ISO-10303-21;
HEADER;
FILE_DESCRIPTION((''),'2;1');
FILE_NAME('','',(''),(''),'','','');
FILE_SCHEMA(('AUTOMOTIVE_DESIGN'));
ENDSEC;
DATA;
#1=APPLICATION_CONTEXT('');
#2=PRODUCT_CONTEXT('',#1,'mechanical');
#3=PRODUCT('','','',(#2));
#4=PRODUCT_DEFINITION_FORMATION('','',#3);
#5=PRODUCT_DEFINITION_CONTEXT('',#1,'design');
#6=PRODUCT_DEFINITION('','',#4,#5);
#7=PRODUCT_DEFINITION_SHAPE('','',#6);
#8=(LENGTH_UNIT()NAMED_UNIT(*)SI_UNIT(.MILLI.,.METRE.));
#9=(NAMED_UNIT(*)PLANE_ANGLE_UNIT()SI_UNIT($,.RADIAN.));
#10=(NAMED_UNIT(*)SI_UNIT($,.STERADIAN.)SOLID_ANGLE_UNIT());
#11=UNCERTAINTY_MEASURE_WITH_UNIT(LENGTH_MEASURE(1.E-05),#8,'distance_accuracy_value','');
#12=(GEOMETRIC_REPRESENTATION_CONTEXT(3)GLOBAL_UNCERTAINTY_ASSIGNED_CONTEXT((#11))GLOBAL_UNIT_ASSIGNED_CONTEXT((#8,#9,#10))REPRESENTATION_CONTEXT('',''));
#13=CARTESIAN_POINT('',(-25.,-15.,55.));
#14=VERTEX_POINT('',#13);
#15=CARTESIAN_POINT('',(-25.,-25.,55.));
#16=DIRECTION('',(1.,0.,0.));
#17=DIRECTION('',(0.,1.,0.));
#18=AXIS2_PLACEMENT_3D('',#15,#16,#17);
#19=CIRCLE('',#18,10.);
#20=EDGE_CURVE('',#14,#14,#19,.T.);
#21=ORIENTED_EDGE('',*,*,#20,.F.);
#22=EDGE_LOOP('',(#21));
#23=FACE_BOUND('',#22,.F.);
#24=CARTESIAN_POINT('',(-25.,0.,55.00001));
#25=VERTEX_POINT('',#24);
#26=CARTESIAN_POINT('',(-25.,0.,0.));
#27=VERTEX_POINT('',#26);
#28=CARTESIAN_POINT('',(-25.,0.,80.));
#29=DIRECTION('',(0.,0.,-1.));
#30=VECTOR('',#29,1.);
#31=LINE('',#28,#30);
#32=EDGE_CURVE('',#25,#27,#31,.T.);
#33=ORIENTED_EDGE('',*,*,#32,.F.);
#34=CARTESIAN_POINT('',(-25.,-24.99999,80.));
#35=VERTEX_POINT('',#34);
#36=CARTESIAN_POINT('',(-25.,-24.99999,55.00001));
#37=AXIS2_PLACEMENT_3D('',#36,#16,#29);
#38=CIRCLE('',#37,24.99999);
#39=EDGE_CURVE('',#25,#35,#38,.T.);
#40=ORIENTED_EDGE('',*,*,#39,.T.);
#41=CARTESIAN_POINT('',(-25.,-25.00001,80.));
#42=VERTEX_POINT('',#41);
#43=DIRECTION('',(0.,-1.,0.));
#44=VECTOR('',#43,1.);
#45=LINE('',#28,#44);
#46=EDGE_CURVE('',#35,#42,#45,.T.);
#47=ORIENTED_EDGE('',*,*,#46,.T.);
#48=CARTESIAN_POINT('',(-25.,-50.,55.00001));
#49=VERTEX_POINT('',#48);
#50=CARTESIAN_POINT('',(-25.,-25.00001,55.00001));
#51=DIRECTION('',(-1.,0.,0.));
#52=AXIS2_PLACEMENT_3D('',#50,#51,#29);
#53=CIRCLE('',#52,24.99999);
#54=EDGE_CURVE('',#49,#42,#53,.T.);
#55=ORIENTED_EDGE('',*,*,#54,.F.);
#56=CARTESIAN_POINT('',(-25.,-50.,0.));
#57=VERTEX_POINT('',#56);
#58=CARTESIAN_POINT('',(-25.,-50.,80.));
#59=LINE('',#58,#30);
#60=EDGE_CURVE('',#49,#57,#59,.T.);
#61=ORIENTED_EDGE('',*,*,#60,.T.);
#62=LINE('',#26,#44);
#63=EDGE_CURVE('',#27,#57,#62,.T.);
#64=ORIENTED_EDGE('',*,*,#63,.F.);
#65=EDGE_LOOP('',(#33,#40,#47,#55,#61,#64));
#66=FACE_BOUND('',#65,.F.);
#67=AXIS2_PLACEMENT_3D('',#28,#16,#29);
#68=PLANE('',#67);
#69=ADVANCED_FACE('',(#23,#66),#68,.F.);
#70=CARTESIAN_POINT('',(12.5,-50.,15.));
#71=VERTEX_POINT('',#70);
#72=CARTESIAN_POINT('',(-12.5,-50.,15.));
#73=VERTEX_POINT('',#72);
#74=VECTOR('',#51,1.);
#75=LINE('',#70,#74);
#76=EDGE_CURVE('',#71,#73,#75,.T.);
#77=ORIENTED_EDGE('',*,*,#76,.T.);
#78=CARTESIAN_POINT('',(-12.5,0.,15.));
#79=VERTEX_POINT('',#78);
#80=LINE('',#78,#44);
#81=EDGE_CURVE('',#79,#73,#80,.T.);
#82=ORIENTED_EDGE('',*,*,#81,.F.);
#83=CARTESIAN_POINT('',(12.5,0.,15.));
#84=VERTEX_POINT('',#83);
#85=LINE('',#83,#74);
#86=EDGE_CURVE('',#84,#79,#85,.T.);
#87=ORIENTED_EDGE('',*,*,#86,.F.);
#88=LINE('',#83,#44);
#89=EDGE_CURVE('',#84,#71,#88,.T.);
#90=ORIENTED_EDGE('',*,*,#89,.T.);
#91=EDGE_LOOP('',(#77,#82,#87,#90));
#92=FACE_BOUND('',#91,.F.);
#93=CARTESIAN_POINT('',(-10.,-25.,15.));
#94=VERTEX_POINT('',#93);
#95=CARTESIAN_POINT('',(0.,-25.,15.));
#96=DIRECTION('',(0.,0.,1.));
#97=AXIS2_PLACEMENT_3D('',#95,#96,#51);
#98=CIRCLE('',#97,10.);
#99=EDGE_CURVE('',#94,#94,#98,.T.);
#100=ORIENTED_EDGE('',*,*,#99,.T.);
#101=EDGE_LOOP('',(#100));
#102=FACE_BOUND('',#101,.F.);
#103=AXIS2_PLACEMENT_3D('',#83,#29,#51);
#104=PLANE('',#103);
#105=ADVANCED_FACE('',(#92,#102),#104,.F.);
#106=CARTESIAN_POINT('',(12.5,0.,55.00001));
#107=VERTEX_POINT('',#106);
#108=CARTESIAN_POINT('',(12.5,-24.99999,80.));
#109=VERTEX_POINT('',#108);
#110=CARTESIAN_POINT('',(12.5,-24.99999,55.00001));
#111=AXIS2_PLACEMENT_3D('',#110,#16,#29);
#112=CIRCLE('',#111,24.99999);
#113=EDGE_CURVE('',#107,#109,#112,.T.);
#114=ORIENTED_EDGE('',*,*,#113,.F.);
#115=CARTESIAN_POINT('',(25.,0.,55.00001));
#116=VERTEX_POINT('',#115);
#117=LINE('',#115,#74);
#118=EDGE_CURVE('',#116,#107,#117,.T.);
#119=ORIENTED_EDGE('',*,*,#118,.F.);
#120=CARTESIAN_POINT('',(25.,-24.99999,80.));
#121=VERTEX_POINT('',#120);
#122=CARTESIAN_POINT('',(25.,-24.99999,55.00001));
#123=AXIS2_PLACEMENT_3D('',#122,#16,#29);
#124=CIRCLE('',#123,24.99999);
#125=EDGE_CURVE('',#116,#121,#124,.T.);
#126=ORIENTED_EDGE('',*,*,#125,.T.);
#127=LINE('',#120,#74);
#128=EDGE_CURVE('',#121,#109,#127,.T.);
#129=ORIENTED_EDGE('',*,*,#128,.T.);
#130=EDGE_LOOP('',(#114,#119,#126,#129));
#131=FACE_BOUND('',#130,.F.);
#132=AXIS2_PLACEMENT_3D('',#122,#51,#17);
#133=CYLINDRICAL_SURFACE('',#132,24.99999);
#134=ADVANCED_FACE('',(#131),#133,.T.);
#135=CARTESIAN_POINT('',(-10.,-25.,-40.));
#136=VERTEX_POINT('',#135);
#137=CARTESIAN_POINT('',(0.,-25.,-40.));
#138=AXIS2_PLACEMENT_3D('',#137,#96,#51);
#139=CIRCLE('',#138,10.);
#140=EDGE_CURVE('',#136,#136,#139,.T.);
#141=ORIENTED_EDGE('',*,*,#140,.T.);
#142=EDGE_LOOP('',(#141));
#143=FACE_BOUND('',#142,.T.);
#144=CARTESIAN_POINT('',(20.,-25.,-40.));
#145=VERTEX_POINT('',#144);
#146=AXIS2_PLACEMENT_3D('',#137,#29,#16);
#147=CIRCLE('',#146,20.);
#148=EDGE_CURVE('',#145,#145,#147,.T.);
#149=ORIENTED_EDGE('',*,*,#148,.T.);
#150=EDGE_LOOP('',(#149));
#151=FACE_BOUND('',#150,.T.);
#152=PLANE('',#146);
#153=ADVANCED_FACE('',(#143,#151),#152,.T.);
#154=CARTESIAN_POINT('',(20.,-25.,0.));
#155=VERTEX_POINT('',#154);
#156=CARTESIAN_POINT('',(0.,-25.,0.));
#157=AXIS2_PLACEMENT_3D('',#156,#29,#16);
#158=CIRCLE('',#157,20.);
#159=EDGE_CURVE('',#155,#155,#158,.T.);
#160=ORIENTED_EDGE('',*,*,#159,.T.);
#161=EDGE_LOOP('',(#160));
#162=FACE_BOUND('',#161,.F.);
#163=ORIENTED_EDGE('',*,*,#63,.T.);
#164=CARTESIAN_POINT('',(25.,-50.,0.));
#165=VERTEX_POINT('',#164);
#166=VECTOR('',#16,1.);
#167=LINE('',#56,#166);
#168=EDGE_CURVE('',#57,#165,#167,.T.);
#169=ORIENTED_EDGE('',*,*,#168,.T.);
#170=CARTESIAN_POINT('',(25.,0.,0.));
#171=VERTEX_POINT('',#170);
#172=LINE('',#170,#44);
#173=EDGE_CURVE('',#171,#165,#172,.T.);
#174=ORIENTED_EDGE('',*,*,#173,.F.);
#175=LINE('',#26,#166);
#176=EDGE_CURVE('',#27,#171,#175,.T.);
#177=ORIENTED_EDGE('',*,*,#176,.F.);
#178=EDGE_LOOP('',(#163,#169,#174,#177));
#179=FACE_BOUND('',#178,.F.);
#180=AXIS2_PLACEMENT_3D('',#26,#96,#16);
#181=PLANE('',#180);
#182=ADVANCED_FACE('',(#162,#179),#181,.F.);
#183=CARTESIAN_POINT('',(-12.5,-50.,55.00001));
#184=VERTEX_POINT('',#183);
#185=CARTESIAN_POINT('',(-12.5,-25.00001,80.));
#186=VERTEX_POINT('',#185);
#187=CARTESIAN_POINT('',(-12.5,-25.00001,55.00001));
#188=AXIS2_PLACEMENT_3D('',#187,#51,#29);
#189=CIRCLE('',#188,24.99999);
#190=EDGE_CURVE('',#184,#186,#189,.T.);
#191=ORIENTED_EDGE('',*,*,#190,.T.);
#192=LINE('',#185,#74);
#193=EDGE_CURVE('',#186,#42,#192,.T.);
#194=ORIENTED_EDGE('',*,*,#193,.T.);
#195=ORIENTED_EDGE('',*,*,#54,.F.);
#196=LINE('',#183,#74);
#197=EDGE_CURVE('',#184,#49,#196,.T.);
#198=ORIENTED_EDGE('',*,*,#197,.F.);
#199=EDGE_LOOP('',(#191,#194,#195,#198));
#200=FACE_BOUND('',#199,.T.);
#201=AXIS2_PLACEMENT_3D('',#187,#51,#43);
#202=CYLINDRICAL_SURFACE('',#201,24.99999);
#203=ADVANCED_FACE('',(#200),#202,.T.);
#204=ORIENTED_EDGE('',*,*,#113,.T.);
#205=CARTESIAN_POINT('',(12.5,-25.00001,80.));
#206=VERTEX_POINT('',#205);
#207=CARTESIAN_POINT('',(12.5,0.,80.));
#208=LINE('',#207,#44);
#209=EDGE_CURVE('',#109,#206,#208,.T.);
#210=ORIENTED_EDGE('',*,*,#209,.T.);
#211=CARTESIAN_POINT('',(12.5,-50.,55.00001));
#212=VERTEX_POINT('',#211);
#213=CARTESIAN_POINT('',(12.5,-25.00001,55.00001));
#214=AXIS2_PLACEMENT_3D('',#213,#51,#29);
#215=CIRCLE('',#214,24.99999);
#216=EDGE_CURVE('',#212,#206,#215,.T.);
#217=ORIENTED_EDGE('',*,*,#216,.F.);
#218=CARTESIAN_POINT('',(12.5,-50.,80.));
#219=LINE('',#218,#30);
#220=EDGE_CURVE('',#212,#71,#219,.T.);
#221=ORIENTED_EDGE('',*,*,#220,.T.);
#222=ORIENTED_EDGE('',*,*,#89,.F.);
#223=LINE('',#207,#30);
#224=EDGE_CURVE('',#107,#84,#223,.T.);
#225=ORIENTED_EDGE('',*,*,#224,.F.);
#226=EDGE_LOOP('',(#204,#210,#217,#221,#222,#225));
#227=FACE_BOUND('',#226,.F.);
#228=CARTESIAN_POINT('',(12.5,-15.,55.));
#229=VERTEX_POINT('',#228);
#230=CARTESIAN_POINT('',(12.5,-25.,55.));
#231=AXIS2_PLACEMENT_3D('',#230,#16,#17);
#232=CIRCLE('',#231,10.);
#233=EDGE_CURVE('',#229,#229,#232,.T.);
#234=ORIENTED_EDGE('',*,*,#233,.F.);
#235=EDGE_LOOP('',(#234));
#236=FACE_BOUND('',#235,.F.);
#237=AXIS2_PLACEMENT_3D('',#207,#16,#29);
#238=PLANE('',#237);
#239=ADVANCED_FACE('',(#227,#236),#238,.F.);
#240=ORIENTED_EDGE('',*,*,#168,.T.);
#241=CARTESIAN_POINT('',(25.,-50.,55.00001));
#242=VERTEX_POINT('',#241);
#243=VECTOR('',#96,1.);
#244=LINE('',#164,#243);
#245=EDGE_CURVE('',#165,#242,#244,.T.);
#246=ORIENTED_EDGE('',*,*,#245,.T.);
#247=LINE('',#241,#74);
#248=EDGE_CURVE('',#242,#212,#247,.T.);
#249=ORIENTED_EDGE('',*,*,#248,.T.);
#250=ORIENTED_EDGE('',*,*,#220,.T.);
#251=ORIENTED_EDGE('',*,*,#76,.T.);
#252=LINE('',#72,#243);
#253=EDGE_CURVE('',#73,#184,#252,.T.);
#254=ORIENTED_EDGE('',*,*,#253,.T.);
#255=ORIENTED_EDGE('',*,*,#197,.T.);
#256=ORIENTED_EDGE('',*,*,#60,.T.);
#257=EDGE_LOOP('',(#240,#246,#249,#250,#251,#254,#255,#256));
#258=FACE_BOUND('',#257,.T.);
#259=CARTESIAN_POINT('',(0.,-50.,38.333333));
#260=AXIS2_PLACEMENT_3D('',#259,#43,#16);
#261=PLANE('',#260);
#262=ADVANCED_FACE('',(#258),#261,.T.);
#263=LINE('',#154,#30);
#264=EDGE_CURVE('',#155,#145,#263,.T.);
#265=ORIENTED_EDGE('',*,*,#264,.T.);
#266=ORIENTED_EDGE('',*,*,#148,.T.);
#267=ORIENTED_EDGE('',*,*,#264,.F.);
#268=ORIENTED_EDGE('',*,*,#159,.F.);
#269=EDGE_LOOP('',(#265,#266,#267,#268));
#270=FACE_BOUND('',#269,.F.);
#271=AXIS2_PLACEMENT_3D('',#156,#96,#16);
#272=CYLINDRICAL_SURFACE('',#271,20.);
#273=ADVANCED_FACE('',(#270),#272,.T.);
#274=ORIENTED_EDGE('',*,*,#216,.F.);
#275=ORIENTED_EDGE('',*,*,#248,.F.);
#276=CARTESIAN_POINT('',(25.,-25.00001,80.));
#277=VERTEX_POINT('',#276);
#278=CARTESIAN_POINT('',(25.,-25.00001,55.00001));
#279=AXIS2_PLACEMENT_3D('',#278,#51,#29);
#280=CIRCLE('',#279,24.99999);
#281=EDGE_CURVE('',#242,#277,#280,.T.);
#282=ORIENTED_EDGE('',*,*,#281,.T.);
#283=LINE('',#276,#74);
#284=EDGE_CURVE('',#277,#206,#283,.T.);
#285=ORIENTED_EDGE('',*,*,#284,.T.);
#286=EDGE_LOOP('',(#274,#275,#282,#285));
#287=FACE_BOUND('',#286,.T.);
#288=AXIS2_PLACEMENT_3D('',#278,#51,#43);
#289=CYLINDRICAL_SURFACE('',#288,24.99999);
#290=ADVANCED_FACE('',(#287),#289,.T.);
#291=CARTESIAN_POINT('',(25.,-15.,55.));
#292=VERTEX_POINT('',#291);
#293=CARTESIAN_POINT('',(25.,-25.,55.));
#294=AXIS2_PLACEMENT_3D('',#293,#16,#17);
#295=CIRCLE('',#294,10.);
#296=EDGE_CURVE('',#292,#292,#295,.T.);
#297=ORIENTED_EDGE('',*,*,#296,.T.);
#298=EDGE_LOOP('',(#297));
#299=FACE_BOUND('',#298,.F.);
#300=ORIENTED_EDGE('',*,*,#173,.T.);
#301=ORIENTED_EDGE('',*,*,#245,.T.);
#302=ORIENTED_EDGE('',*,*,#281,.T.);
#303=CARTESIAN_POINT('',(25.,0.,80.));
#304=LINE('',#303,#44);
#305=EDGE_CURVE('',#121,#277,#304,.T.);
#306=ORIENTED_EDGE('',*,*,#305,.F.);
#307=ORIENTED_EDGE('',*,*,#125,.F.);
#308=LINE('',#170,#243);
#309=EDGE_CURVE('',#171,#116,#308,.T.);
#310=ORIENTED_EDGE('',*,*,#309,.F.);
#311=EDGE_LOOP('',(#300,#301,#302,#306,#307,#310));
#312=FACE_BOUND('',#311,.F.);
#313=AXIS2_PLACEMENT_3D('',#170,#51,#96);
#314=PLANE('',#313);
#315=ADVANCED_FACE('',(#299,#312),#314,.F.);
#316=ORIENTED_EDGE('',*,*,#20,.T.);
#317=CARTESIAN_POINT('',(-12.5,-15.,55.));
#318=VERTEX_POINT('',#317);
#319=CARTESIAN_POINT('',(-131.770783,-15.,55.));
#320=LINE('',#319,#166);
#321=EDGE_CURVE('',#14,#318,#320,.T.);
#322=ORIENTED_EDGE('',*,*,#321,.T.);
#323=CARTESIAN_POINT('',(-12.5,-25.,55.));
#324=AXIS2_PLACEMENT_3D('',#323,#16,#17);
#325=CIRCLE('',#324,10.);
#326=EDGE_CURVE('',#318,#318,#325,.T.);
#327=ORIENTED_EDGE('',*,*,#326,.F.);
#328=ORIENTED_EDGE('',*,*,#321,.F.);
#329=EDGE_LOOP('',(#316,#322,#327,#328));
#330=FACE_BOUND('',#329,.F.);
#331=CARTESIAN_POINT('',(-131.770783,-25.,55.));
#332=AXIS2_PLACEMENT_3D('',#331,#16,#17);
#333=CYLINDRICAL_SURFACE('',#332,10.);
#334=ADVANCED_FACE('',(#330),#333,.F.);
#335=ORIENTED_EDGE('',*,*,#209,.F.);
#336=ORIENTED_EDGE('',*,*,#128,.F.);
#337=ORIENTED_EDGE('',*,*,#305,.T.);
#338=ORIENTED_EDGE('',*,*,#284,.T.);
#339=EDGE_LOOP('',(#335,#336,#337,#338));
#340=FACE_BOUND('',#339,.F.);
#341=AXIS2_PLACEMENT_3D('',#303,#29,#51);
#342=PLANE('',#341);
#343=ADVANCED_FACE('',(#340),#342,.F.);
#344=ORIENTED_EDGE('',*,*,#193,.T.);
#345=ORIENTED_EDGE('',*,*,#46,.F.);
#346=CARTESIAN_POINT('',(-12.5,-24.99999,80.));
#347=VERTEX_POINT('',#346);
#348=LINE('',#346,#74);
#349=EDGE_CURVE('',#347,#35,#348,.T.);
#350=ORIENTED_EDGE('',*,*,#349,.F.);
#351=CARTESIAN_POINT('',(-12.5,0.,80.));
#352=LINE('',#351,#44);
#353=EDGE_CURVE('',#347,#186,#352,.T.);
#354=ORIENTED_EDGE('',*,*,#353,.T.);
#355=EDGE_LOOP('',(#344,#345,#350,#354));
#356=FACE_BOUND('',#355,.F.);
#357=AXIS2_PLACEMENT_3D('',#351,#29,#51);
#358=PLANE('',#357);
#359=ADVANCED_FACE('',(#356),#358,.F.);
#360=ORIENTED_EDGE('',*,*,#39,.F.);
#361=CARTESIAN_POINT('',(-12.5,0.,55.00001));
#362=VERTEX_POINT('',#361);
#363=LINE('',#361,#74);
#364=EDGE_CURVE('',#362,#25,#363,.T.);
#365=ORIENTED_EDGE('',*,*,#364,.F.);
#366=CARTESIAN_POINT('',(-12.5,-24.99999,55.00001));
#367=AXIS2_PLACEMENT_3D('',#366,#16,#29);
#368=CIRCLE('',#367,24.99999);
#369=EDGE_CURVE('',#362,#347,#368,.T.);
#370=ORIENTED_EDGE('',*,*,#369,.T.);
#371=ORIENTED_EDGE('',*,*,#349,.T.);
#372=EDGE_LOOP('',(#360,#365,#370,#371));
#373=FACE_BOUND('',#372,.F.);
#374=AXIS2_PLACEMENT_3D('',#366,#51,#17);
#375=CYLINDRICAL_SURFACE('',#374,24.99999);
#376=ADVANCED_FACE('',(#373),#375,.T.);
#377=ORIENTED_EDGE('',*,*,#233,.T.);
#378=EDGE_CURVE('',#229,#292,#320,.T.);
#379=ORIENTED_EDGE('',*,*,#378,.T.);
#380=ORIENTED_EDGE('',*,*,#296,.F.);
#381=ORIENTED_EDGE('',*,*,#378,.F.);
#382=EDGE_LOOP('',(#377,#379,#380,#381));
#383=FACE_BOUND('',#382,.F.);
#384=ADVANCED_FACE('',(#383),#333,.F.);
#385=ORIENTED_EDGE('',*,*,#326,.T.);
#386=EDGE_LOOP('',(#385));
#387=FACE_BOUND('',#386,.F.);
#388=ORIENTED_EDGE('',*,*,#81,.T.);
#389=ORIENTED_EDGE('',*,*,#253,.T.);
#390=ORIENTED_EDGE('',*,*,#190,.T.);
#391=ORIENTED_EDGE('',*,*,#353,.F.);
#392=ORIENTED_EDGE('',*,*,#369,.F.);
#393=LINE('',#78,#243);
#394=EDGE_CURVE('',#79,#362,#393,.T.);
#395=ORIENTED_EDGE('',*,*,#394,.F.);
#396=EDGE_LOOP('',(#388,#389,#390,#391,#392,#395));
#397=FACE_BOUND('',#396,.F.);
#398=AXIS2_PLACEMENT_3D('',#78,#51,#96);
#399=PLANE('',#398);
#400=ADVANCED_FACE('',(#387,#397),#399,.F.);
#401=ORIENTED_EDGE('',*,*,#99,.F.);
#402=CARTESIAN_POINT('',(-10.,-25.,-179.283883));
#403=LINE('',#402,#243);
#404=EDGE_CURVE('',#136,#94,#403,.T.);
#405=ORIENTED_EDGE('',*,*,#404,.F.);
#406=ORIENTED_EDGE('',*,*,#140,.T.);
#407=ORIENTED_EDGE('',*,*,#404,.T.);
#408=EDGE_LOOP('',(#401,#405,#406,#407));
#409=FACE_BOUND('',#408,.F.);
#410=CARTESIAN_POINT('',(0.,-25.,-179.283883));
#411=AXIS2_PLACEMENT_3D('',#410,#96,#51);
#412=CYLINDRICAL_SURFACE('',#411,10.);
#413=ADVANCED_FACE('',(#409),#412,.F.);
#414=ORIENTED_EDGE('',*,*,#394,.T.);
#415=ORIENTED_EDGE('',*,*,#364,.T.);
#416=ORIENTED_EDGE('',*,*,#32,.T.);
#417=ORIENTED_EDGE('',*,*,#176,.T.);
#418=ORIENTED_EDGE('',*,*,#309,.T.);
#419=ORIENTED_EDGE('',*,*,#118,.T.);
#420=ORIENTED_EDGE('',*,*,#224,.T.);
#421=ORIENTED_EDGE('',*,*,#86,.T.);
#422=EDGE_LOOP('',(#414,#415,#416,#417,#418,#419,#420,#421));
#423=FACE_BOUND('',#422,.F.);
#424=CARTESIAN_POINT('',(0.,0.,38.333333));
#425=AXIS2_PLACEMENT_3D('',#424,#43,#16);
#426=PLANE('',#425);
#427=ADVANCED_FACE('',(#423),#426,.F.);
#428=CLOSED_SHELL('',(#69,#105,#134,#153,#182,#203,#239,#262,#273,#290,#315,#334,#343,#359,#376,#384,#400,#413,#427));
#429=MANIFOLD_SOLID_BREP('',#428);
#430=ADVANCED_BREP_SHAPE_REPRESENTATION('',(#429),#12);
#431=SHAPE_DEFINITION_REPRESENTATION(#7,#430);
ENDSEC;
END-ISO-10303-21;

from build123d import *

# Parameters (mm, degrees)
F1_DEPTH = 50
F3_D     = 20
F4_R     = 20
F5_DEPTH = 40
F7_D     = 20
F8_R     = 24.99999


# Not quite as in the source:
# - a fillet or chamfer is up to 0.001 mm smaller than in the source, because OpenCascade refuses the exact size


with BuildPart() as f1:
    # F0 (on Front) → F1 (new body)
    with BuildSketch(Plane.XZ):
        Polygon((-25, 0), (0, 0), (25, 0), (25, 80), (12.5, 80), (12.5, 15), (0, 15), (-12.5, 15), (-12.5, 80), (-25, 80), align=None)
    extrude(amount=F1_DEPTH)

    # F3 (through all)
    with Locations(Plane(origin=(-25, 0, 0), x_dir=(0, -1, 0), z_dir=(-1, 0, 0))):
        with Locations((25, 55)):
            Hole(F3_D / 2)

    # F4 (on face) → F5 (join)
    with BuildSketch(Plane(origin=(0, 0, 0), x_dir=(1, 0, 0), z_dir=(0, 0, -1))):
        with Locations((0, 25)):
            Circle(F4_R)
    extrude(amount=F5_DEPTH)

    # F7 (through all)
    with Locations(Plane(origin=(0, 0, -40), x_dir=(1, 0, 0), z_dir=(0, 0, -1))):
        with Locations((0, 25)):
            Hole(F7_D / 2)

    # F8 (radius 25 in the source; OpenCascade refuses exactly that, so slightly less here)
    f8_edges = [f1.edges().sort_by_distance(p)[0] for p in [
        (18.75, -50, 80),
        (18.75, 0, 80),
        (-18.75, -50, 80),
        (-18.75, 0, 80),
    ]]
    fillet(f8_edges, radius=F8_R)


solid = f1.part
